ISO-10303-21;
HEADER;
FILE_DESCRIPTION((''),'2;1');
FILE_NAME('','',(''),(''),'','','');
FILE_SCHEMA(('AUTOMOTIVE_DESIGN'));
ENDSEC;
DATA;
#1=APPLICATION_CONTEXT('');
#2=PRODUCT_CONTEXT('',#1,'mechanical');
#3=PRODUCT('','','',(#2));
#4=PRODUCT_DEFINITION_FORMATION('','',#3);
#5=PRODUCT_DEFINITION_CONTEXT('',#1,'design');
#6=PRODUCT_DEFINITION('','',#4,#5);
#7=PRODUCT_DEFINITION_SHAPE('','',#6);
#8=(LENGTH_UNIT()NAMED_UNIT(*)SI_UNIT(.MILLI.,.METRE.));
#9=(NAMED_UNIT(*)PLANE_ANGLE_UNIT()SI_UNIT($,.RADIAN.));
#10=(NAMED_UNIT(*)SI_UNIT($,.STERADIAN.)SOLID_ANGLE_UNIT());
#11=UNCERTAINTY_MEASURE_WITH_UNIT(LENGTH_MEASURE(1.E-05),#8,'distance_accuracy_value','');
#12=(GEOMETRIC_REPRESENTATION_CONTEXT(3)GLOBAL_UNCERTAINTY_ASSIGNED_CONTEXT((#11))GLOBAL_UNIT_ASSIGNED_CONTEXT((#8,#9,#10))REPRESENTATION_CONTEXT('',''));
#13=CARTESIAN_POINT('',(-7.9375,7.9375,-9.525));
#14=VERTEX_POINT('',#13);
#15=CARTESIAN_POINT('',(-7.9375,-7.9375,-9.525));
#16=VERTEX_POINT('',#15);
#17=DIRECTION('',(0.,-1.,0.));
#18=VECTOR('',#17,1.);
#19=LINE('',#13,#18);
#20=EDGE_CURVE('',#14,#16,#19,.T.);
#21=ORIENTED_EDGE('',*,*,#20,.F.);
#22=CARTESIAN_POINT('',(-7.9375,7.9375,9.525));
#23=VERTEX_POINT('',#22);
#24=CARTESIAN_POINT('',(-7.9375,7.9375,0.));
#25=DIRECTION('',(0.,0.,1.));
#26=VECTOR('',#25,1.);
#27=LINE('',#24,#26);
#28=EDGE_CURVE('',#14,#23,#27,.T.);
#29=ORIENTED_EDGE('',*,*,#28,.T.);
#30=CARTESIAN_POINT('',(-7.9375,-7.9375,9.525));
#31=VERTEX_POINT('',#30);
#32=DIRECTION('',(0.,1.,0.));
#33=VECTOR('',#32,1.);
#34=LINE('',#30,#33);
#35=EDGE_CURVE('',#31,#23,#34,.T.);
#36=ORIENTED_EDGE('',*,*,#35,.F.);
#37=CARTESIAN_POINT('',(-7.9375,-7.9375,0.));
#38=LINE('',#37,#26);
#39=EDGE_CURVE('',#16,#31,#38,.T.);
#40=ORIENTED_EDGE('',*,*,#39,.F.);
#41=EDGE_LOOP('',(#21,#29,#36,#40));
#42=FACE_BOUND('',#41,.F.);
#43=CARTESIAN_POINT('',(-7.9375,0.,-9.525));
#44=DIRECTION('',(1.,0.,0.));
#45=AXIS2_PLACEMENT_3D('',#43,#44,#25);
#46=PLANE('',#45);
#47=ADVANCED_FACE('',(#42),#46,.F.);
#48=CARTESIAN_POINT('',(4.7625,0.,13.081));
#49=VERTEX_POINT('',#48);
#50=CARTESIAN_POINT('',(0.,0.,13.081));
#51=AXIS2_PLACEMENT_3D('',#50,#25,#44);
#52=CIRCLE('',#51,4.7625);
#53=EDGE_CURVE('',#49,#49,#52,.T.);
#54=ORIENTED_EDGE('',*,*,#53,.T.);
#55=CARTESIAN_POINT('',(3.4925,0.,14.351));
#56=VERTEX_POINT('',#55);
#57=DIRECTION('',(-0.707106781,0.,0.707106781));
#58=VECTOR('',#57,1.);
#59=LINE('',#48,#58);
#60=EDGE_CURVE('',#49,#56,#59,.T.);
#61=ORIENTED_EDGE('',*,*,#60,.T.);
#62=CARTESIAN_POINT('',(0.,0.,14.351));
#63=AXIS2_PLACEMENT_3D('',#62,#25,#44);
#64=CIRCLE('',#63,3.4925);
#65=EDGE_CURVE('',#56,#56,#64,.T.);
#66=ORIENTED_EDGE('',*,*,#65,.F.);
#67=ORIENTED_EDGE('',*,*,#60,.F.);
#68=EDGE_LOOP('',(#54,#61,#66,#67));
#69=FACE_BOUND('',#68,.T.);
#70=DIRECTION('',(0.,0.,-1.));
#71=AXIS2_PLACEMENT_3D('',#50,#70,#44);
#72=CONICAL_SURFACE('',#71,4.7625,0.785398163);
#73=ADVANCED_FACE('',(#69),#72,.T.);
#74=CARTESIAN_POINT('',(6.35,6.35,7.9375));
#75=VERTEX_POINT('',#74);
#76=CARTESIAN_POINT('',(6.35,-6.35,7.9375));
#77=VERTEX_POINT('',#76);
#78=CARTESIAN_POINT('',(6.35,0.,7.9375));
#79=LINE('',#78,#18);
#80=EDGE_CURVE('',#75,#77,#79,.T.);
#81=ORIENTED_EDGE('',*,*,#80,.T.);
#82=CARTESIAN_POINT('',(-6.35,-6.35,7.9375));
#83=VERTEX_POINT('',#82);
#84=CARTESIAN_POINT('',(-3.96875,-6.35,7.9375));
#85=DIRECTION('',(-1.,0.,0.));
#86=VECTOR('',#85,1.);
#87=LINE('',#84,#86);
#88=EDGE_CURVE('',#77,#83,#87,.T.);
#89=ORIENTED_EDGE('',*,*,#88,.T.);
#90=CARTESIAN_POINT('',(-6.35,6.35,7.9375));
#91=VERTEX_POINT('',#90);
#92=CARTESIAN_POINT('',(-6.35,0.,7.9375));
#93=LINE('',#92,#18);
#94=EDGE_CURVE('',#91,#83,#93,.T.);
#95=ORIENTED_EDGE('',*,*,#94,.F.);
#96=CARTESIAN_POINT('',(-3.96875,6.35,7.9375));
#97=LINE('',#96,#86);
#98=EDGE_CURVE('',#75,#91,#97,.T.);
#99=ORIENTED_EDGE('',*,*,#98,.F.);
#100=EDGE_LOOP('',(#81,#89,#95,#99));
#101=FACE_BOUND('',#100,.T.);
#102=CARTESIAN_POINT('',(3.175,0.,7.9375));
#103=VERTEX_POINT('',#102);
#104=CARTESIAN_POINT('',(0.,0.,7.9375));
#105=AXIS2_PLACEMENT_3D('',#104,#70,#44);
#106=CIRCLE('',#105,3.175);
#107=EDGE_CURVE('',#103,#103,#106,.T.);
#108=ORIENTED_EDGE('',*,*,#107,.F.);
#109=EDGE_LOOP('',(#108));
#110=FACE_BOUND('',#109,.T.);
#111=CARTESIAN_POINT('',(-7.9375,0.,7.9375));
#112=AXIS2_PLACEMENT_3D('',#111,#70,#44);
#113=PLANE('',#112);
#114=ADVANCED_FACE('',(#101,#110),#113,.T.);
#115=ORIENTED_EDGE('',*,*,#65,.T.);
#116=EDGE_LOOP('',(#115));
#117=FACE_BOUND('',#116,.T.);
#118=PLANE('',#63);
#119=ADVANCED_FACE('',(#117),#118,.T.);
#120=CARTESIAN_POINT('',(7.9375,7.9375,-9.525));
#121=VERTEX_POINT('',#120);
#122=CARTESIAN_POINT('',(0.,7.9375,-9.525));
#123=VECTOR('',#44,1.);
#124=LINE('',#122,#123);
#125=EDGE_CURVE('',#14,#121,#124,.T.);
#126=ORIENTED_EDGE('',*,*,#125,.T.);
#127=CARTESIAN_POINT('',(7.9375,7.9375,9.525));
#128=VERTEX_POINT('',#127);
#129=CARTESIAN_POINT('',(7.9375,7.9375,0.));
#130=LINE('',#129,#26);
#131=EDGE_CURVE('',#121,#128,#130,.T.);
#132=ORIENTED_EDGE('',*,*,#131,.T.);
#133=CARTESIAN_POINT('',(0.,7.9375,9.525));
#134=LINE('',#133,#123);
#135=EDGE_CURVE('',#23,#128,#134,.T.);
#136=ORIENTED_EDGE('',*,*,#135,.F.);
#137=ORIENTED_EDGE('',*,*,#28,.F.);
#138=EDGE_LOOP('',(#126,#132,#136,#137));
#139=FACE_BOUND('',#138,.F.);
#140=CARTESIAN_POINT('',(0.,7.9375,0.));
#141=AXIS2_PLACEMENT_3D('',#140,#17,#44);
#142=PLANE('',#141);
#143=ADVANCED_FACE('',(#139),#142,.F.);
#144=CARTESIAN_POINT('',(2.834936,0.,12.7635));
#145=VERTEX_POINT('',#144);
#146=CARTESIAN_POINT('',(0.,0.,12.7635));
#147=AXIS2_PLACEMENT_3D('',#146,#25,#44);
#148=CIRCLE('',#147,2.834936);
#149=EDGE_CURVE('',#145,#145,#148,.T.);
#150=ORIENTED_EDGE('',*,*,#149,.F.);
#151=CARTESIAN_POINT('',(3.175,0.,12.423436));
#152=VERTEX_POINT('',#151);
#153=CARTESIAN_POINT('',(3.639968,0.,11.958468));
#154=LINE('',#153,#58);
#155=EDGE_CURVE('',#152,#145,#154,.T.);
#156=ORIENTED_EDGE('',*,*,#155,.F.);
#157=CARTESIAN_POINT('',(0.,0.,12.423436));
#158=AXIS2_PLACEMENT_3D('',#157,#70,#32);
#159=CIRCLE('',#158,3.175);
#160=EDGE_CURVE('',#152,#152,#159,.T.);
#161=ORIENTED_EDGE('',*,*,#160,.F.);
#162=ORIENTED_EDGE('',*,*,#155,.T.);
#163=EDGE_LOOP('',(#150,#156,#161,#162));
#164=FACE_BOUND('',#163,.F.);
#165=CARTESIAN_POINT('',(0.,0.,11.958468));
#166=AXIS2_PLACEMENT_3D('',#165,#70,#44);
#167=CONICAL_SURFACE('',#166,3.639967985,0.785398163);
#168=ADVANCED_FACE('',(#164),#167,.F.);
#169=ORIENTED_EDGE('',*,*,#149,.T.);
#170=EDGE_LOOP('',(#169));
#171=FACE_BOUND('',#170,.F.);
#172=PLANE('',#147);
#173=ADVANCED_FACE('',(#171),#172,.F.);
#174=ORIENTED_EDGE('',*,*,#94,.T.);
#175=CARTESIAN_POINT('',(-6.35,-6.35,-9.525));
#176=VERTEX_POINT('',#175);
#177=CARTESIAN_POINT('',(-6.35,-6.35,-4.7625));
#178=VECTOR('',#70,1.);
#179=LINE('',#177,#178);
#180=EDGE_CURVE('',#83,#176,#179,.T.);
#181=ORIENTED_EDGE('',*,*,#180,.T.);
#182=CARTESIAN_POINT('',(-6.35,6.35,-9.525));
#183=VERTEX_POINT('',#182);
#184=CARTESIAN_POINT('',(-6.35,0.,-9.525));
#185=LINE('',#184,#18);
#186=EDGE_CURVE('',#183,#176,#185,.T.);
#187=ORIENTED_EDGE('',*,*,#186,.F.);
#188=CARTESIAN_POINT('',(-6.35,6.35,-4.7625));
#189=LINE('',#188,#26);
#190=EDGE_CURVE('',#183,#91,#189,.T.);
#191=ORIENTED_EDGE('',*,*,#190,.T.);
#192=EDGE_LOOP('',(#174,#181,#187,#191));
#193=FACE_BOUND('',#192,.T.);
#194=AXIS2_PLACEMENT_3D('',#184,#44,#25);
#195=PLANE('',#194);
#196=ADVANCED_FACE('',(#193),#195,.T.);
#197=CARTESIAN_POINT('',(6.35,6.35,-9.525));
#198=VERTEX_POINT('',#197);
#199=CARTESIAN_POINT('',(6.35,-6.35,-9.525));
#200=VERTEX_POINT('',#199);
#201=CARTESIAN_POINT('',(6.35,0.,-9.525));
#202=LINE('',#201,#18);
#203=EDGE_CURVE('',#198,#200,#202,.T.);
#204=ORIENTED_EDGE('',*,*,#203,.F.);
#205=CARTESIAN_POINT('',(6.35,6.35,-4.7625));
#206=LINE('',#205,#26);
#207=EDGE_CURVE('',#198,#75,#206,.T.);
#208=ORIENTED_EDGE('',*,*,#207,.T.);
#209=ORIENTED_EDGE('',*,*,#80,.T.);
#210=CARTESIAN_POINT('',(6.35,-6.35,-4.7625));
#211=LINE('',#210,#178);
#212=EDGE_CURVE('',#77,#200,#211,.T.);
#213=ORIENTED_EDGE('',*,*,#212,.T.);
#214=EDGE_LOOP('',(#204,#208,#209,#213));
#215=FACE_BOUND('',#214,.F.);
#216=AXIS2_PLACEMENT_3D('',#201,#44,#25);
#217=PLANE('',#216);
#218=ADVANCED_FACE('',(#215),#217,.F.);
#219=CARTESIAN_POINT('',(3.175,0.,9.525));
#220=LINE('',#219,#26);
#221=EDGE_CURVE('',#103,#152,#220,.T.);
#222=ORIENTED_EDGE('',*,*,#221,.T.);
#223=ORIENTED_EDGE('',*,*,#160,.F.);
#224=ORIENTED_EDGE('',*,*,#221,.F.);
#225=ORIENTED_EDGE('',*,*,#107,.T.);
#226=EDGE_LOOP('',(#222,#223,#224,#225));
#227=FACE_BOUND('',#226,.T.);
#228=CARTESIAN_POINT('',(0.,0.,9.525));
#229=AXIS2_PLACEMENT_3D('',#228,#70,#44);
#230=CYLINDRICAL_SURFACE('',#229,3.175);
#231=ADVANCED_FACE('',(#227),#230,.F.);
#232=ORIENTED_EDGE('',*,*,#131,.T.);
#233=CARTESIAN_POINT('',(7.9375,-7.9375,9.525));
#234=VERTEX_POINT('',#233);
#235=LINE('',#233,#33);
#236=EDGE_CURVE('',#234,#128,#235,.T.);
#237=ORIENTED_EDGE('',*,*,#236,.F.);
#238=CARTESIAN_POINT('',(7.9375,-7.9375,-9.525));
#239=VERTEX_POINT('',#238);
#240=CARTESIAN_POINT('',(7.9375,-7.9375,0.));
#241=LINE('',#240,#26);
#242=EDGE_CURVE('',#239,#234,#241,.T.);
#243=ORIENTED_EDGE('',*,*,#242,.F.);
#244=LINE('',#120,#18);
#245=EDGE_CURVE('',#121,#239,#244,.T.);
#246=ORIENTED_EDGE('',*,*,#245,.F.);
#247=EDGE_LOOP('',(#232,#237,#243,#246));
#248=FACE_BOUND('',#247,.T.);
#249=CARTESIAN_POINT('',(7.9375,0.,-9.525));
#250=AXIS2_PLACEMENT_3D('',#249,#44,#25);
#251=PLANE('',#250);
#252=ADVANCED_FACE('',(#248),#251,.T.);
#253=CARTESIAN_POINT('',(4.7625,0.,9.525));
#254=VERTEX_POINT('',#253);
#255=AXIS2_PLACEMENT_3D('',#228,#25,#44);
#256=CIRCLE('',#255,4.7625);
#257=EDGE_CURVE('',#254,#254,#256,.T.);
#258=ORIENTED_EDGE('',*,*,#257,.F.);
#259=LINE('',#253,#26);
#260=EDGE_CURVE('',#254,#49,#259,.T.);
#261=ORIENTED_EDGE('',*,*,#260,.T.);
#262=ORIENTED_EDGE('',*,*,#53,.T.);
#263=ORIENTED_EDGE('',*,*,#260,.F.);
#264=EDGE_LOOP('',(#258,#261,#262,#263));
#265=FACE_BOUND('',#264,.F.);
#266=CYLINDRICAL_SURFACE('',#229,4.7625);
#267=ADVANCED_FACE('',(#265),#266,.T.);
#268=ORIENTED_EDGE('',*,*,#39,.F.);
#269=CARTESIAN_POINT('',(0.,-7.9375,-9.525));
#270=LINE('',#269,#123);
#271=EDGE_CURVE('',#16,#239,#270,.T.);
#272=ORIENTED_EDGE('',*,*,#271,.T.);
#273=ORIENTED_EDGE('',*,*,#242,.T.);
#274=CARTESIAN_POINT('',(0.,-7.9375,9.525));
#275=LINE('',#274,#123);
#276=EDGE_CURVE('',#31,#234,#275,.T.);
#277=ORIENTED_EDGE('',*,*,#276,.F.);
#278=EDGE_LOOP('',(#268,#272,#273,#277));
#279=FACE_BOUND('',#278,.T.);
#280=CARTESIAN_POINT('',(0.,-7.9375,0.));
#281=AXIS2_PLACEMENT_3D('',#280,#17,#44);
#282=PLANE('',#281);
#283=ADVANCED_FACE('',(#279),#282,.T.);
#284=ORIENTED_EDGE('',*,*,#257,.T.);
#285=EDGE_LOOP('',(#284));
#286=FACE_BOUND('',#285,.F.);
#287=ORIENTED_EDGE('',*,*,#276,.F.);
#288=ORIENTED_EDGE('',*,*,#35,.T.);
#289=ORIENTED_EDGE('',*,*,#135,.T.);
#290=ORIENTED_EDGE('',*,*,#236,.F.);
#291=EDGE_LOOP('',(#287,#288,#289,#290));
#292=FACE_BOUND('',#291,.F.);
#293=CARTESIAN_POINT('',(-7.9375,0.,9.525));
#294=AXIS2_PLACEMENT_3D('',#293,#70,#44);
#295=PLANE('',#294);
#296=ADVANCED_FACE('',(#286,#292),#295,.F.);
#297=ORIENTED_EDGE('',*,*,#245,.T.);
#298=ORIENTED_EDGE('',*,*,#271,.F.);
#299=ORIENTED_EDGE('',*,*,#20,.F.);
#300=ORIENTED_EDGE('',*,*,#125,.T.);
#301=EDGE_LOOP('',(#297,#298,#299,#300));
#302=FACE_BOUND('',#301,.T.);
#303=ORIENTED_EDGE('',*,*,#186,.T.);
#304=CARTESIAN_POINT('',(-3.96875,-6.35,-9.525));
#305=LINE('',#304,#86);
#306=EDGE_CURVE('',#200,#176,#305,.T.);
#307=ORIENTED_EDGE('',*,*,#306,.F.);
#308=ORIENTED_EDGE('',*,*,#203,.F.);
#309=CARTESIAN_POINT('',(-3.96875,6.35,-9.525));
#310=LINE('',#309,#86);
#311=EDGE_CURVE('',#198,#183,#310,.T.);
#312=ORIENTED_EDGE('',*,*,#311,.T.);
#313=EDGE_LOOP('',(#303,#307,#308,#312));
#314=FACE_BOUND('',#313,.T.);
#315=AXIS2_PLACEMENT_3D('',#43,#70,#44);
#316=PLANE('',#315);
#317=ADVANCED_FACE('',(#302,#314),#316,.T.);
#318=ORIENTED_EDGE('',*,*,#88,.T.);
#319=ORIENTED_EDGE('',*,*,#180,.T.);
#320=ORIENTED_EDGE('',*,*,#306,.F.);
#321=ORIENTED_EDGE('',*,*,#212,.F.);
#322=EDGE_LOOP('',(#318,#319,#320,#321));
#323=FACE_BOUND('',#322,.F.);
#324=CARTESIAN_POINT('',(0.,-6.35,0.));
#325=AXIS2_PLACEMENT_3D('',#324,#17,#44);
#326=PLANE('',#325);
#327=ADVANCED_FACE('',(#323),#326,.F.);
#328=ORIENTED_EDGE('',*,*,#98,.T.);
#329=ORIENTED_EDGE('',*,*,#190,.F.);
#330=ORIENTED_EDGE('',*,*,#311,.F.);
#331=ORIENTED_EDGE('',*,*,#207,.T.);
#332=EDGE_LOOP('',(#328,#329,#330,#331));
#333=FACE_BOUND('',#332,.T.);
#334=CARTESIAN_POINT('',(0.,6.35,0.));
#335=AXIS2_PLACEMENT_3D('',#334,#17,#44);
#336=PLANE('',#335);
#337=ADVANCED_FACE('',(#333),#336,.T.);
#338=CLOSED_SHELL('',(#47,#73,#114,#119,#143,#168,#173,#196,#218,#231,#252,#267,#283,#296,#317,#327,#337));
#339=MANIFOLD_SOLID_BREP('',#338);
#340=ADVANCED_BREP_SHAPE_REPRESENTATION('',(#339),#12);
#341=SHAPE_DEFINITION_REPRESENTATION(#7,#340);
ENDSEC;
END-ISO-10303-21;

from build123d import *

# Parameters (mm, degrees)
F1_W     = 15.875
F1_H     = 19.05
F2_DEPTH = 7.9375
F3_R     = 4.7625
F4_DEPTH = 4.826
F5_SIZE  = 1.27
F6_T     = -1.5875


# Not quite as in the source:
# - a variable given as a bare number and used for a length is read in inches; the dataset says mm whatever the document's units were


with BuildPart() as f2:
    # F1 (on Front) → F2 (new body, symmetric)
    with BuildSketch(Plane.XZ):
        Rectangle(F1_W, F1_H)
    extrude(amount=F2_DEPTH, both=True)

    # F3 (on face) → F4 (join)
    with BuildSketch(Plane.XY.offset(9.525)):
        Circle(F3_R)
    extrude(amount=F4_DEPTH)

    # F5
    f5_edges = [f2.edges().sort_by_distance(p)[0] for p in [
        (-4.7625, 0, 14.351),
    ]]
    chamfer(f5_edges, length=F5_SIZE)

    # F6
    f6_openings = [f2.faces().sort_by_distance(p)[0] for p in [
        (0, 0, -9.525),
    ]]
    offset(amount=F6_T, openings=f6_openings, kind=Kind.INTERSECTION)


solid = f2.part
